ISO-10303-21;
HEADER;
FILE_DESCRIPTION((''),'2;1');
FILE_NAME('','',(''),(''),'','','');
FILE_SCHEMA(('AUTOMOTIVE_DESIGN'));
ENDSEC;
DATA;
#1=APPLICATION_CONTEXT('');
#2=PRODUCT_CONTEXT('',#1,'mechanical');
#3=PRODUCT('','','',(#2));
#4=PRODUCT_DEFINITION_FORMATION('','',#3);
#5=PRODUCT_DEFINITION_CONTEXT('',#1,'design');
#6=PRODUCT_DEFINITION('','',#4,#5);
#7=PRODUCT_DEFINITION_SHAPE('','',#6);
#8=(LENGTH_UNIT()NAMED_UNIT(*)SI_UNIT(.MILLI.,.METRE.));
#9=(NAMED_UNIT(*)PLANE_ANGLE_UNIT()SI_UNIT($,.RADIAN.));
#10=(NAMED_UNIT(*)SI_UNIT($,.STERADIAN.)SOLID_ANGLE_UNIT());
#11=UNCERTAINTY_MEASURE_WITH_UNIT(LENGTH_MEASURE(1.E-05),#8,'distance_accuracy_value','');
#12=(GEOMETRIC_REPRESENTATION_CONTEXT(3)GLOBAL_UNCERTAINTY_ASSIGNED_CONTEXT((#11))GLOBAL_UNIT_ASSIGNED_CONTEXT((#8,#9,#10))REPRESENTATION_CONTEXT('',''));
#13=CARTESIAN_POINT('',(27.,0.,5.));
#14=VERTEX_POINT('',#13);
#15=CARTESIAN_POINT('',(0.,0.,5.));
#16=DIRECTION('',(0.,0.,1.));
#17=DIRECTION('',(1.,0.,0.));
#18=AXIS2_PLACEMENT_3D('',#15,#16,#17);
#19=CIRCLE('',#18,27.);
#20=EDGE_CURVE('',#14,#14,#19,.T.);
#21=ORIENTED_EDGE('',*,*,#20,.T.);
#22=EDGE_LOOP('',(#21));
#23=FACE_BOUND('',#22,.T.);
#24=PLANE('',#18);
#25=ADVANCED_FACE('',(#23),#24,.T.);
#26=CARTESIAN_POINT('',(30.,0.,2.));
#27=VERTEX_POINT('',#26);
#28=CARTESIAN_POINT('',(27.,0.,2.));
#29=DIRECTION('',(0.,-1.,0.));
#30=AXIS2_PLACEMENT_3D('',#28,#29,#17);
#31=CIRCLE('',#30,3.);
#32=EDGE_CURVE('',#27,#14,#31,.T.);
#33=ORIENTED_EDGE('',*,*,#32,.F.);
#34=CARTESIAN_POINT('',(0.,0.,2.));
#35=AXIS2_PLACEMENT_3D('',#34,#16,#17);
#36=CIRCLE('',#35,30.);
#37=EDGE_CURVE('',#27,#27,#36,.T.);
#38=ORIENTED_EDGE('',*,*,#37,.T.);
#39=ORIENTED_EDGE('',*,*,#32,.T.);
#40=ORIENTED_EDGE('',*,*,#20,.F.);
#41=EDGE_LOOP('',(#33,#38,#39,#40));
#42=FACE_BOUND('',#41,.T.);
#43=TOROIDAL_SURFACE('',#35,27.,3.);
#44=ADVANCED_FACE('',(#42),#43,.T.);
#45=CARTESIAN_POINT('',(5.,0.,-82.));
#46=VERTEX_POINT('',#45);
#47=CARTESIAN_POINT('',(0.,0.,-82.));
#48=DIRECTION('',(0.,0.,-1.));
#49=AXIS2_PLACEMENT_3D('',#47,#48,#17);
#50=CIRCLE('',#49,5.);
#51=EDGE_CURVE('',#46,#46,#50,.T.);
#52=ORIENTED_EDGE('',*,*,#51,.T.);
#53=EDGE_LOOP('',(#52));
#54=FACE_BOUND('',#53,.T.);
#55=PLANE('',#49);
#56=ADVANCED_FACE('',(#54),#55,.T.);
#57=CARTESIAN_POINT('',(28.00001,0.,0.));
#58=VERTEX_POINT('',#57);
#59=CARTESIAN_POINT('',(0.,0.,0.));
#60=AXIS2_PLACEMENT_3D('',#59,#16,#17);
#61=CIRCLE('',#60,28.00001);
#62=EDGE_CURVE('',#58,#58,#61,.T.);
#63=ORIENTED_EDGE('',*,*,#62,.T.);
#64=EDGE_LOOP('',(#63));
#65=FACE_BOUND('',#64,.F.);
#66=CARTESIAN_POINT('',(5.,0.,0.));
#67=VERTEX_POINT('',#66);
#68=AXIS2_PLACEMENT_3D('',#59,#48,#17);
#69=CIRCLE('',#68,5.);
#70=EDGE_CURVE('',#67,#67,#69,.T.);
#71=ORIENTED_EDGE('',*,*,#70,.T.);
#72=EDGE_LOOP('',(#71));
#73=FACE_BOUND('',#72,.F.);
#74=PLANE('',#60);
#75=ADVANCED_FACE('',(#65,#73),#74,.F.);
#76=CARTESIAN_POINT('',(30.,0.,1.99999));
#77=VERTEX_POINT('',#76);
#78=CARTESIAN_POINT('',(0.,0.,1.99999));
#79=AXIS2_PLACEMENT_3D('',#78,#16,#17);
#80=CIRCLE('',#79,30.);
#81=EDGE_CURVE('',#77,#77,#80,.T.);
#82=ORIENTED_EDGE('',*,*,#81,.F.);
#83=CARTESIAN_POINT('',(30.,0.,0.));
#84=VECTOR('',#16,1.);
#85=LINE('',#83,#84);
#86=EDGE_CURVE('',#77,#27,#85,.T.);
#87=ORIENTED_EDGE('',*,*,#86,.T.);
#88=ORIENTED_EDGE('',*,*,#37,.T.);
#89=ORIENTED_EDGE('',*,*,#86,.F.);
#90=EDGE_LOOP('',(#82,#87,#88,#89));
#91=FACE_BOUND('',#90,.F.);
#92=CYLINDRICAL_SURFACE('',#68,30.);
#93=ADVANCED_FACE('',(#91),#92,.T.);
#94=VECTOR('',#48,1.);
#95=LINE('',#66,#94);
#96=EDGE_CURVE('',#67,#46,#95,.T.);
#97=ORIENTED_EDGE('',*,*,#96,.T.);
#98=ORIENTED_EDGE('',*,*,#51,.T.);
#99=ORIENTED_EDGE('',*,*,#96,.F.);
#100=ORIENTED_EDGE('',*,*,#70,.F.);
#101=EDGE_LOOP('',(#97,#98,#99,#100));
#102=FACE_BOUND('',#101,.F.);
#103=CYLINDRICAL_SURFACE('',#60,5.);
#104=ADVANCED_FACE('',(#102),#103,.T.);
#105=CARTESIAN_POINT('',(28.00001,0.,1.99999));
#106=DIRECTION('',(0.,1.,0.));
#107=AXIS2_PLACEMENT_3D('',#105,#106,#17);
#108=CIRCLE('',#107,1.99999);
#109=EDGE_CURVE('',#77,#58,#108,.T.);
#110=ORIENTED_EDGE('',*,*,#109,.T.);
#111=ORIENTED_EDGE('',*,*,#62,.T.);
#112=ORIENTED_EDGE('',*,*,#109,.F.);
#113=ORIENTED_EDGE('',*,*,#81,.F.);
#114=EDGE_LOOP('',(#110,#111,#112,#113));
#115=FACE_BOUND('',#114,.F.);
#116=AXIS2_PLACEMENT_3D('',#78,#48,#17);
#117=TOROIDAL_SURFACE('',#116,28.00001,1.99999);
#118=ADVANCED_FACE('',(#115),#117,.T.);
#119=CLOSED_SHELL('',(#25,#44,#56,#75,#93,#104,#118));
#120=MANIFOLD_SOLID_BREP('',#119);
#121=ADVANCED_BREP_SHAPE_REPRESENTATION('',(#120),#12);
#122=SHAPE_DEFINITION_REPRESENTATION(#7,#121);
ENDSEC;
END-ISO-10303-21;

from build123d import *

# Parameters (mm, degrees)
F0_R     = 30
F1_DEPTH = 5
F2_R     = 3
F3_R     = 1.99999
F4_R     = 5
F5_DEPTH = 82


# Not quite as in the source:
# - a fillet or chamfer is up to 0.001 mm smaller than in the source, because OpenCascade refuses the exact size


with BuildPart() as f1:
    # F0 (on Top) → F1 (new body)
    with BuildSketch(Plane.XY):
        Circle(F0_R)
    extrude(amount=F1_DEPTH)

    # F2
    f2_edges = [f1.edges().sort_by_distance(p)[0] for p in [
        (-30, 0, 5),
    ]]
    fillet(f2_edges, radius=F2_R)

    # F3 (radius 2 in the source; OpenCascade refuses exactly that, so slightly less here)
    f3_edges = [f1.edges().sort_by_distance(p)[0] for p in [
        (-30, 0, 0),
    ]]
    fillet(f3_edges, radius=F3_R)

    # F4 (on face) → F5 (join)
    with BuildSketch(Plane(origin=(0, 0, 0), x_dir=(1, 0, 0), z_dir=(0, 0, -1))):
        Circle(F4_R)
    extrude(amount=F5_DEPTH)


solid = f1.part
